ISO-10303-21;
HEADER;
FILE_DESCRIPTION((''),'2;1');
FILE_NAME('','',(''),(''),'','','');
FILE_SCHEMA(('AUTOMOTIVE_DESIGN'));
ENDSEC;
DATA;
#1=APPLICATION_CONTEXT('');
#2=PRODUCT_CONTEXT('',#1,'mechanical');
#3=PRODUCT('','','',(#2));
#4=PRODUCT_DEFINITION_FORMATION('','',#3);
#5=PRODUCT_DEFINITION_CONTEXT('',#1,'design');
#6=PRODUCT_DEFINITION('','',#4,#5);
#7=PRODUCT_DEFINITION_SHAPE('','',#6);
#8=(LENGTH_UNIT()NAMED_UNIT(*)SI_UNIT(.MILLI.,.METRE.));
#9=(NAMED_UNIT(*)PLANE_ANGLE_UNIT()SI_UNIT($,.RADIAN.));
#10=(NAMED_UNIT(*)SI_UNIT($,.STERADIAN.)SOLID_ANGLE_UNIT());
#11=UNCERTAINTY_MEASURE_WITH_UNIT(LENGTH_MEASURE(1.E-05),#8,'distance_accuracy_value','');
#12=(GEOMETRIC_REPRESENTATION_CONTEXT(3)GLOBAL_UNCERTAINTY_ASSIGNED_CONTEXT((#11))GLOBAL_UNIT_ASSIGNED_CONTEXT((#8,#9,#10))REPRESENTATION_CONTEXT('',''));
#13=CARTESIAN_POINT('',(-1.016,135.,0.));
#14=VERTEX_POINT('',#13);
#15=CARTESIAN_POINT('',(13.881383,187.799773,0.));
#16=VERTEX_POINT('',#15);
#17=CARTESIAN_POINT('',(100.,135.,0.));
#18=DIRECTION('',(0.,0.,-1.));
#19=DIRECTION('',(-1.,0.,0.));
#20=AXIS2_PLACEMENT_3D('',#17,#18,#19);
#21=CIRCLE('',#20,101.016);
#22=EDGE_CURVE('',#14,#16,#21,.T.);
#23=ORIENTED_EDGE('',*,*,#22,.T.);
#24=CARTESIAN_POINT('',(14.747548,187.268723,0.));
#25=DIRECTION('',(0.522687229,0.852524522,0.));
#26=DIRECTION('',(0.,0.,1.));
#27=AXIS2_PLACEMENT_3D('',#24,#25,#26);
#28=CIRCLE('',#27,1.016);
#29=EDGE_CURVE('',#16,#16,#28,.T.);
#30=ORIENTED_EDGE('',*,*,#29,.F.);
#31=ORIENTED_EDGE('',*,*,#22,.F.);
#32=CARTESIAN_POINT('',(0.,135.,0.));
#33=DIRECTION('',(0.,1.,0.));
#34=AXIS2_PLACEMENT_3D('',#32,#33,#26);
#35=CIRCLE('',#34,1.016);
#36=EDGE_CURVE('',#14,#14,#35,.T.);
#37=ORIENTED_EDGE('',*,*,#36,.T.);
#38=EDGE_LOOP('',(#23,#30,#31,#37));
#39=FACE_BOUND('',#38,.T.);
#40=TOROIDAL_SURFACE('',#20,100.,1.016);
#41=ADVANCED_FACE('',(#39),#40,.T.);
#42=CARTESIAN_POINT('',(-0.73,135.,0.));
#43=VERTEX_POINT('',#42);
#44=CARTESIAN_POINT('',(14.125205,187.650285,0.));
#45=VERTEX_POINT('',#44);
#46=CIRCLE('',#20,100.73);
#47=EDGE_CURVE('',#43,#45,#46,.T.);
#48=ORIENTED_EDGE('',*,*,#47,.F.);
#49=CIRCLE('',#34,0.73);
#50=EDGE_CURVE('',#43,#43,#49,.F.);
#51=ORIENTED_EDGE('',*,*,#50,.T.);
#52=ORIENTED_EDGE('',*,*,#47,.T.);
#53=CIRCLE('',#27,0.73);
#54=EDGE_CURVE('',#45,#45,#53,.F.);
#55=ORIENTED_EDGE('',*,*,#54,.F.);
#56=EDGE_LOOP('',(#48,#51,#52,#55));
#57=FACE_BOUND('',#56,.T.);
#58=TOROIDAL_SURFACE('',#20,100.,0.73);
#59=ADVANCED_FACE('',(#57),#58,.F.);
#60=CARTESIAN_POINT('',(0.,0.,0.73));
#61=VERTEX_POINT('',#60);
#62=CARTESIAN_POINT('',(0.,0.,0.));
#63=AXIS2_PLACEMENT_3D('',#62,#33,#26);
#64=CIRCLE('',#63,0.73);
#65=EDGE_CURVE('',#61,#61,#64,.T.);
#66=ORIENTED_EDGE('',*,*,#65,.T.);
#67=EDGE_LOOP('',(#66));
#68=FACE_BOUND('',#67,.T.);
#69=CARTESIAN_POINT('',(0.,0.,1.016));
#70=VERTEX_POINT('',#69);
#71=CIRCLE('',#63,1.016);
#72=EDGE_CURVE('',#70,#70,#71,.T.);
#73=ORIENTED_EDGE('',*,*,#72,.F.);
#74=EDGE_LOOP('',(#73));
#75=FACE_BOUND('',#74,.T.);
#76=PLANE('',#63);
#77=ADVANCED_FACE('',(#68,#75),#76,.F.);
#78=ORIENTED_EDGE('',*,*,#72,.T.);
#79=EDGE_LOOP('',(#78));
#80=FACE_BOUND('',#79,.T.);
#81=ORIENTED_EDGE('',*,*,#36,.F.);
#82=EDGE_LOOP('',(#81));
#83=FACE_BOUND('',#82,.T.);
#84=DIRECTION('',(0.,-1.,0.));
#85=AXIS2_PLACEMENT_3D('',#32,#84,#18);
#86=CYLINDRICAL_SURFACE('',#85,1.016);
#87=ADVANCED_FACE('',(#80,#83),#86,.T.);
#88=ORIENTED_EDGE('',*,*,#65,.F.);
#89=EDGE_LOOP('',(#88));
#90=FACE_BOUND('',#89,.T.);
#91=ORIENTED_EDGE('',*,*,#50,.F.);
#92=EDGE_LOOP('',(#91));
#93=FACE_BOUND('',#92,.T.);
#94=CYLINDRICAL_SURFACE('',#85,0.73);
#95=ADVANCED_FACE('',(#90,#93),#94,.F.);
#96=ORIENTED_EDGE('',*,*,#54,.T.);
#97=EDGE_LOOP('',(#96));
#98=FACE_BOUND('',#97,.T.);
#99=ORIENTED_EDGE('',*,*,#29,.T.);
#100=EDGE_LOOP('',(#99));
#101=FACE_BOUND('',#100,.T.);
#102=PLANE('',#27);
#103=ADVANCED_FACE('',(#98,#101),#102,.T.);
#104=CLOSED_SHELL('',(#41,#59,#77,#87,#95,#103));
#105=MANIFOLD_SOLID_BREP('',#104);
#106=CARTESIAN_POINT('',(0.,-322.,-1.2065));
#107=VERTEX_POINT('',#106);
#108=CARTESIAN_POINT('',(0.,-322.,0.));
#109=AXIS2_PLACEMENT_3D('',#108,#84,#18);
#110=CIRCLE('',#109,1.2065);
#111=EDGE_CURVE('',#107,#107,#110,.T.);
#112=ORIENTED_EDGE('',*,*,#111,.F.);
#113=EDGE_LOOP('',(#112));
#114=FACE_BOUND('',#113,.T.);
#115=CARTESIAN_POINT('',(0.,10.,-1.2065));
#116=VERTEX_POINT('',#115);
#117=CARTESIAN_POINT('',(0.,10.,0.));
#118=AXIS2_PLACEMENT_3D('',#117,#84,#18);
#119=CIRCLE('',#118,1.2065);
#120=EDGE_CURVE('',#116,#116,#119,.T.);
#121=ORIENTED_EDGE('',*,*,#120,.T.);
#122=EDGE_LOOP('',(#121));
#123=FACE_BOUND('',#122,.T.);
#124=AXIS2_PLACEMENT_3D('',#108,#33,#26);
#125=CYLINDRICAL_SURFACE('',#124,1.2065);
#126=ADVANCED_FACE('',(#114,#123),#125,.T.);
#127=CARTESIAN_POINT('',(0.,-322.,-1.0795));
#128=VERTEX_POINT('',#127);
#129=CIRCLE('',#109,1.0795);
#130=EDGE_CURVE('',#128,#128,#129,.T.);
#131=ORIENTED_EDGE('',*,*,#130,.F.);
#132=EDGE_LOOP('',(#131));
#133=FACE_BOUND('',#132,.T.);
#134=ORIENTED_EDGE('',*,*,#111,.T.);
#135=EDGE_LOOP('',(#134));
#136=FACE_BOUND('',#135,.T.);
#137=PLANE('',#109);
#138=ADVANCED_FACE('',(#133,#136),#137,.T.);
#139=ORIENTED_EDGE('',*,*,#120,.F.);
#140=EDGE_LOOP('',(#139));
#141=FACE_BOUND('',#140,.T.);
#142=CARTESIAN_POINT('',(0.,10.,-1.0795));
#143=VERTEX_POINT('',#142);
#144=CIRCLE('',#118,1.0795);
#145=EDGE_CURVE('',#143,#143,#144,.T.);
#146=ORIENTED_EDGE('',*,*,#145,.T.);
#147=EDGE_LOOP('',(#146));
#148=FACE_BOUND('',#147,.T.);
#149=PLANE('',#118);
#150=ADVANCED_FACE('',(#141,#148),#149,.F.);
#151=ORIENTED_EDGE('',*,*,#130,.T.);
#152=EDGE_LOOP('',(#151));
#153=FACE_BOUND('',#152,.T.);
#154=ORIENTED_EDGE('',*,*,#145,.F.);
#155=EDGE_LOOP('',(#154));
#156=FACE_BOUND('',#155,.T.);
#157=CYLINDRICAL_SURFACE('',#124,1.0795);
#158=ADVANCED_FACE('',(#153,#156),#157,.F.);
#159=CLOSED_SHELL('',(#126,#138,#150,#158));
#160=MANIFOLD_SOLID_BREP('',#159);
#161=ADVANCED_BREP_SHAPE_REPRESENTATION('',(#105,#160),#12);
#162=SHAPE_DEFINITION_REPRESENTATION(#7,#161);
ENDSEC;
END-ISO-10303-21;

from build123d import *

# Parameters (mm, degrees)
SKETCH1_R           = 1.016
SKETCH1_R_2         = 0.73
BOSS_EXTRUDE1_DEPTH = 135
SWEEP2_OUTLINE_R    = 1.016
SWEEP2_OUTLINE_R_2  = 0.73
SWEEP2_ANGLE        = 31.512679
SKETCH4_R           = 1.2065
SKETCH4_R_2         = 1.0795
BOSS_EXTRUDE2_DEPTH = 332


# Read off the part's stored shape, not the designer's step: Sweep2
with BuildPart() as part:
    # Sketch1 → Boss-Extrude1 (new body)
    with BuildSketch(Plane(origin=(0, 0, 0), x_dir=(1, 0, 0), z_dir=(0, 1, 0))):
        with Locations(Location((0, 0, 0), (0, 0, 270))):
            Circle(SKETCH1_R)
        with Locations(Location((0, 0, 0), (0, 0, 270))):
            Circle(SKETCH1_R_2, mode=Mode.SUBTRACT)
    extrude(amount=BOSS_EXTRUDE1_DEPTH)

    # Sweep2 outline → Sweep2 (revolve)
    with BuildSketch(Plane(origin=(100, 135, 0), x_dir=(-0.8525245220595056, 0.5226872289306596, 0), z_dir=(0.5226872289306596, 0.8525245220595056, 0))):
        with Locations((100, 0)):
            Circle(SWEEP2_OUTLINE_R)
        with Locations((100, 0)):
            Circle(SWEEP2_OUTLINE_R_2, mode=Mode.SUBTRACT)
    revolve(axis=Axis((100, 135, 0), (0, 0, 1)), revolution_arc=SWEEP2_ANGLE)


with BuildPart() as body_2:
    # Sketch4 → Boss-Extrude2 (new body)
    with BuildSketch(Plane(origin=(0, 10, 0), x_dir=(-1, 0, 0), z_dir=(0, -1, 0))):
        with Locations(Location((0, 0, 0), (0, 0, 90))):
            Circle(SKETCH4_R)
        with Locations(Location((0, 0, 0), (0, 0, 90))):
            Circle(SKETCH4_R_2, mode=Mode.SUBTRACT)
    extrude(amount=BOSS_EXTRUDE2_DEPTH)


solid = Compound([part.part, body_2.part])
